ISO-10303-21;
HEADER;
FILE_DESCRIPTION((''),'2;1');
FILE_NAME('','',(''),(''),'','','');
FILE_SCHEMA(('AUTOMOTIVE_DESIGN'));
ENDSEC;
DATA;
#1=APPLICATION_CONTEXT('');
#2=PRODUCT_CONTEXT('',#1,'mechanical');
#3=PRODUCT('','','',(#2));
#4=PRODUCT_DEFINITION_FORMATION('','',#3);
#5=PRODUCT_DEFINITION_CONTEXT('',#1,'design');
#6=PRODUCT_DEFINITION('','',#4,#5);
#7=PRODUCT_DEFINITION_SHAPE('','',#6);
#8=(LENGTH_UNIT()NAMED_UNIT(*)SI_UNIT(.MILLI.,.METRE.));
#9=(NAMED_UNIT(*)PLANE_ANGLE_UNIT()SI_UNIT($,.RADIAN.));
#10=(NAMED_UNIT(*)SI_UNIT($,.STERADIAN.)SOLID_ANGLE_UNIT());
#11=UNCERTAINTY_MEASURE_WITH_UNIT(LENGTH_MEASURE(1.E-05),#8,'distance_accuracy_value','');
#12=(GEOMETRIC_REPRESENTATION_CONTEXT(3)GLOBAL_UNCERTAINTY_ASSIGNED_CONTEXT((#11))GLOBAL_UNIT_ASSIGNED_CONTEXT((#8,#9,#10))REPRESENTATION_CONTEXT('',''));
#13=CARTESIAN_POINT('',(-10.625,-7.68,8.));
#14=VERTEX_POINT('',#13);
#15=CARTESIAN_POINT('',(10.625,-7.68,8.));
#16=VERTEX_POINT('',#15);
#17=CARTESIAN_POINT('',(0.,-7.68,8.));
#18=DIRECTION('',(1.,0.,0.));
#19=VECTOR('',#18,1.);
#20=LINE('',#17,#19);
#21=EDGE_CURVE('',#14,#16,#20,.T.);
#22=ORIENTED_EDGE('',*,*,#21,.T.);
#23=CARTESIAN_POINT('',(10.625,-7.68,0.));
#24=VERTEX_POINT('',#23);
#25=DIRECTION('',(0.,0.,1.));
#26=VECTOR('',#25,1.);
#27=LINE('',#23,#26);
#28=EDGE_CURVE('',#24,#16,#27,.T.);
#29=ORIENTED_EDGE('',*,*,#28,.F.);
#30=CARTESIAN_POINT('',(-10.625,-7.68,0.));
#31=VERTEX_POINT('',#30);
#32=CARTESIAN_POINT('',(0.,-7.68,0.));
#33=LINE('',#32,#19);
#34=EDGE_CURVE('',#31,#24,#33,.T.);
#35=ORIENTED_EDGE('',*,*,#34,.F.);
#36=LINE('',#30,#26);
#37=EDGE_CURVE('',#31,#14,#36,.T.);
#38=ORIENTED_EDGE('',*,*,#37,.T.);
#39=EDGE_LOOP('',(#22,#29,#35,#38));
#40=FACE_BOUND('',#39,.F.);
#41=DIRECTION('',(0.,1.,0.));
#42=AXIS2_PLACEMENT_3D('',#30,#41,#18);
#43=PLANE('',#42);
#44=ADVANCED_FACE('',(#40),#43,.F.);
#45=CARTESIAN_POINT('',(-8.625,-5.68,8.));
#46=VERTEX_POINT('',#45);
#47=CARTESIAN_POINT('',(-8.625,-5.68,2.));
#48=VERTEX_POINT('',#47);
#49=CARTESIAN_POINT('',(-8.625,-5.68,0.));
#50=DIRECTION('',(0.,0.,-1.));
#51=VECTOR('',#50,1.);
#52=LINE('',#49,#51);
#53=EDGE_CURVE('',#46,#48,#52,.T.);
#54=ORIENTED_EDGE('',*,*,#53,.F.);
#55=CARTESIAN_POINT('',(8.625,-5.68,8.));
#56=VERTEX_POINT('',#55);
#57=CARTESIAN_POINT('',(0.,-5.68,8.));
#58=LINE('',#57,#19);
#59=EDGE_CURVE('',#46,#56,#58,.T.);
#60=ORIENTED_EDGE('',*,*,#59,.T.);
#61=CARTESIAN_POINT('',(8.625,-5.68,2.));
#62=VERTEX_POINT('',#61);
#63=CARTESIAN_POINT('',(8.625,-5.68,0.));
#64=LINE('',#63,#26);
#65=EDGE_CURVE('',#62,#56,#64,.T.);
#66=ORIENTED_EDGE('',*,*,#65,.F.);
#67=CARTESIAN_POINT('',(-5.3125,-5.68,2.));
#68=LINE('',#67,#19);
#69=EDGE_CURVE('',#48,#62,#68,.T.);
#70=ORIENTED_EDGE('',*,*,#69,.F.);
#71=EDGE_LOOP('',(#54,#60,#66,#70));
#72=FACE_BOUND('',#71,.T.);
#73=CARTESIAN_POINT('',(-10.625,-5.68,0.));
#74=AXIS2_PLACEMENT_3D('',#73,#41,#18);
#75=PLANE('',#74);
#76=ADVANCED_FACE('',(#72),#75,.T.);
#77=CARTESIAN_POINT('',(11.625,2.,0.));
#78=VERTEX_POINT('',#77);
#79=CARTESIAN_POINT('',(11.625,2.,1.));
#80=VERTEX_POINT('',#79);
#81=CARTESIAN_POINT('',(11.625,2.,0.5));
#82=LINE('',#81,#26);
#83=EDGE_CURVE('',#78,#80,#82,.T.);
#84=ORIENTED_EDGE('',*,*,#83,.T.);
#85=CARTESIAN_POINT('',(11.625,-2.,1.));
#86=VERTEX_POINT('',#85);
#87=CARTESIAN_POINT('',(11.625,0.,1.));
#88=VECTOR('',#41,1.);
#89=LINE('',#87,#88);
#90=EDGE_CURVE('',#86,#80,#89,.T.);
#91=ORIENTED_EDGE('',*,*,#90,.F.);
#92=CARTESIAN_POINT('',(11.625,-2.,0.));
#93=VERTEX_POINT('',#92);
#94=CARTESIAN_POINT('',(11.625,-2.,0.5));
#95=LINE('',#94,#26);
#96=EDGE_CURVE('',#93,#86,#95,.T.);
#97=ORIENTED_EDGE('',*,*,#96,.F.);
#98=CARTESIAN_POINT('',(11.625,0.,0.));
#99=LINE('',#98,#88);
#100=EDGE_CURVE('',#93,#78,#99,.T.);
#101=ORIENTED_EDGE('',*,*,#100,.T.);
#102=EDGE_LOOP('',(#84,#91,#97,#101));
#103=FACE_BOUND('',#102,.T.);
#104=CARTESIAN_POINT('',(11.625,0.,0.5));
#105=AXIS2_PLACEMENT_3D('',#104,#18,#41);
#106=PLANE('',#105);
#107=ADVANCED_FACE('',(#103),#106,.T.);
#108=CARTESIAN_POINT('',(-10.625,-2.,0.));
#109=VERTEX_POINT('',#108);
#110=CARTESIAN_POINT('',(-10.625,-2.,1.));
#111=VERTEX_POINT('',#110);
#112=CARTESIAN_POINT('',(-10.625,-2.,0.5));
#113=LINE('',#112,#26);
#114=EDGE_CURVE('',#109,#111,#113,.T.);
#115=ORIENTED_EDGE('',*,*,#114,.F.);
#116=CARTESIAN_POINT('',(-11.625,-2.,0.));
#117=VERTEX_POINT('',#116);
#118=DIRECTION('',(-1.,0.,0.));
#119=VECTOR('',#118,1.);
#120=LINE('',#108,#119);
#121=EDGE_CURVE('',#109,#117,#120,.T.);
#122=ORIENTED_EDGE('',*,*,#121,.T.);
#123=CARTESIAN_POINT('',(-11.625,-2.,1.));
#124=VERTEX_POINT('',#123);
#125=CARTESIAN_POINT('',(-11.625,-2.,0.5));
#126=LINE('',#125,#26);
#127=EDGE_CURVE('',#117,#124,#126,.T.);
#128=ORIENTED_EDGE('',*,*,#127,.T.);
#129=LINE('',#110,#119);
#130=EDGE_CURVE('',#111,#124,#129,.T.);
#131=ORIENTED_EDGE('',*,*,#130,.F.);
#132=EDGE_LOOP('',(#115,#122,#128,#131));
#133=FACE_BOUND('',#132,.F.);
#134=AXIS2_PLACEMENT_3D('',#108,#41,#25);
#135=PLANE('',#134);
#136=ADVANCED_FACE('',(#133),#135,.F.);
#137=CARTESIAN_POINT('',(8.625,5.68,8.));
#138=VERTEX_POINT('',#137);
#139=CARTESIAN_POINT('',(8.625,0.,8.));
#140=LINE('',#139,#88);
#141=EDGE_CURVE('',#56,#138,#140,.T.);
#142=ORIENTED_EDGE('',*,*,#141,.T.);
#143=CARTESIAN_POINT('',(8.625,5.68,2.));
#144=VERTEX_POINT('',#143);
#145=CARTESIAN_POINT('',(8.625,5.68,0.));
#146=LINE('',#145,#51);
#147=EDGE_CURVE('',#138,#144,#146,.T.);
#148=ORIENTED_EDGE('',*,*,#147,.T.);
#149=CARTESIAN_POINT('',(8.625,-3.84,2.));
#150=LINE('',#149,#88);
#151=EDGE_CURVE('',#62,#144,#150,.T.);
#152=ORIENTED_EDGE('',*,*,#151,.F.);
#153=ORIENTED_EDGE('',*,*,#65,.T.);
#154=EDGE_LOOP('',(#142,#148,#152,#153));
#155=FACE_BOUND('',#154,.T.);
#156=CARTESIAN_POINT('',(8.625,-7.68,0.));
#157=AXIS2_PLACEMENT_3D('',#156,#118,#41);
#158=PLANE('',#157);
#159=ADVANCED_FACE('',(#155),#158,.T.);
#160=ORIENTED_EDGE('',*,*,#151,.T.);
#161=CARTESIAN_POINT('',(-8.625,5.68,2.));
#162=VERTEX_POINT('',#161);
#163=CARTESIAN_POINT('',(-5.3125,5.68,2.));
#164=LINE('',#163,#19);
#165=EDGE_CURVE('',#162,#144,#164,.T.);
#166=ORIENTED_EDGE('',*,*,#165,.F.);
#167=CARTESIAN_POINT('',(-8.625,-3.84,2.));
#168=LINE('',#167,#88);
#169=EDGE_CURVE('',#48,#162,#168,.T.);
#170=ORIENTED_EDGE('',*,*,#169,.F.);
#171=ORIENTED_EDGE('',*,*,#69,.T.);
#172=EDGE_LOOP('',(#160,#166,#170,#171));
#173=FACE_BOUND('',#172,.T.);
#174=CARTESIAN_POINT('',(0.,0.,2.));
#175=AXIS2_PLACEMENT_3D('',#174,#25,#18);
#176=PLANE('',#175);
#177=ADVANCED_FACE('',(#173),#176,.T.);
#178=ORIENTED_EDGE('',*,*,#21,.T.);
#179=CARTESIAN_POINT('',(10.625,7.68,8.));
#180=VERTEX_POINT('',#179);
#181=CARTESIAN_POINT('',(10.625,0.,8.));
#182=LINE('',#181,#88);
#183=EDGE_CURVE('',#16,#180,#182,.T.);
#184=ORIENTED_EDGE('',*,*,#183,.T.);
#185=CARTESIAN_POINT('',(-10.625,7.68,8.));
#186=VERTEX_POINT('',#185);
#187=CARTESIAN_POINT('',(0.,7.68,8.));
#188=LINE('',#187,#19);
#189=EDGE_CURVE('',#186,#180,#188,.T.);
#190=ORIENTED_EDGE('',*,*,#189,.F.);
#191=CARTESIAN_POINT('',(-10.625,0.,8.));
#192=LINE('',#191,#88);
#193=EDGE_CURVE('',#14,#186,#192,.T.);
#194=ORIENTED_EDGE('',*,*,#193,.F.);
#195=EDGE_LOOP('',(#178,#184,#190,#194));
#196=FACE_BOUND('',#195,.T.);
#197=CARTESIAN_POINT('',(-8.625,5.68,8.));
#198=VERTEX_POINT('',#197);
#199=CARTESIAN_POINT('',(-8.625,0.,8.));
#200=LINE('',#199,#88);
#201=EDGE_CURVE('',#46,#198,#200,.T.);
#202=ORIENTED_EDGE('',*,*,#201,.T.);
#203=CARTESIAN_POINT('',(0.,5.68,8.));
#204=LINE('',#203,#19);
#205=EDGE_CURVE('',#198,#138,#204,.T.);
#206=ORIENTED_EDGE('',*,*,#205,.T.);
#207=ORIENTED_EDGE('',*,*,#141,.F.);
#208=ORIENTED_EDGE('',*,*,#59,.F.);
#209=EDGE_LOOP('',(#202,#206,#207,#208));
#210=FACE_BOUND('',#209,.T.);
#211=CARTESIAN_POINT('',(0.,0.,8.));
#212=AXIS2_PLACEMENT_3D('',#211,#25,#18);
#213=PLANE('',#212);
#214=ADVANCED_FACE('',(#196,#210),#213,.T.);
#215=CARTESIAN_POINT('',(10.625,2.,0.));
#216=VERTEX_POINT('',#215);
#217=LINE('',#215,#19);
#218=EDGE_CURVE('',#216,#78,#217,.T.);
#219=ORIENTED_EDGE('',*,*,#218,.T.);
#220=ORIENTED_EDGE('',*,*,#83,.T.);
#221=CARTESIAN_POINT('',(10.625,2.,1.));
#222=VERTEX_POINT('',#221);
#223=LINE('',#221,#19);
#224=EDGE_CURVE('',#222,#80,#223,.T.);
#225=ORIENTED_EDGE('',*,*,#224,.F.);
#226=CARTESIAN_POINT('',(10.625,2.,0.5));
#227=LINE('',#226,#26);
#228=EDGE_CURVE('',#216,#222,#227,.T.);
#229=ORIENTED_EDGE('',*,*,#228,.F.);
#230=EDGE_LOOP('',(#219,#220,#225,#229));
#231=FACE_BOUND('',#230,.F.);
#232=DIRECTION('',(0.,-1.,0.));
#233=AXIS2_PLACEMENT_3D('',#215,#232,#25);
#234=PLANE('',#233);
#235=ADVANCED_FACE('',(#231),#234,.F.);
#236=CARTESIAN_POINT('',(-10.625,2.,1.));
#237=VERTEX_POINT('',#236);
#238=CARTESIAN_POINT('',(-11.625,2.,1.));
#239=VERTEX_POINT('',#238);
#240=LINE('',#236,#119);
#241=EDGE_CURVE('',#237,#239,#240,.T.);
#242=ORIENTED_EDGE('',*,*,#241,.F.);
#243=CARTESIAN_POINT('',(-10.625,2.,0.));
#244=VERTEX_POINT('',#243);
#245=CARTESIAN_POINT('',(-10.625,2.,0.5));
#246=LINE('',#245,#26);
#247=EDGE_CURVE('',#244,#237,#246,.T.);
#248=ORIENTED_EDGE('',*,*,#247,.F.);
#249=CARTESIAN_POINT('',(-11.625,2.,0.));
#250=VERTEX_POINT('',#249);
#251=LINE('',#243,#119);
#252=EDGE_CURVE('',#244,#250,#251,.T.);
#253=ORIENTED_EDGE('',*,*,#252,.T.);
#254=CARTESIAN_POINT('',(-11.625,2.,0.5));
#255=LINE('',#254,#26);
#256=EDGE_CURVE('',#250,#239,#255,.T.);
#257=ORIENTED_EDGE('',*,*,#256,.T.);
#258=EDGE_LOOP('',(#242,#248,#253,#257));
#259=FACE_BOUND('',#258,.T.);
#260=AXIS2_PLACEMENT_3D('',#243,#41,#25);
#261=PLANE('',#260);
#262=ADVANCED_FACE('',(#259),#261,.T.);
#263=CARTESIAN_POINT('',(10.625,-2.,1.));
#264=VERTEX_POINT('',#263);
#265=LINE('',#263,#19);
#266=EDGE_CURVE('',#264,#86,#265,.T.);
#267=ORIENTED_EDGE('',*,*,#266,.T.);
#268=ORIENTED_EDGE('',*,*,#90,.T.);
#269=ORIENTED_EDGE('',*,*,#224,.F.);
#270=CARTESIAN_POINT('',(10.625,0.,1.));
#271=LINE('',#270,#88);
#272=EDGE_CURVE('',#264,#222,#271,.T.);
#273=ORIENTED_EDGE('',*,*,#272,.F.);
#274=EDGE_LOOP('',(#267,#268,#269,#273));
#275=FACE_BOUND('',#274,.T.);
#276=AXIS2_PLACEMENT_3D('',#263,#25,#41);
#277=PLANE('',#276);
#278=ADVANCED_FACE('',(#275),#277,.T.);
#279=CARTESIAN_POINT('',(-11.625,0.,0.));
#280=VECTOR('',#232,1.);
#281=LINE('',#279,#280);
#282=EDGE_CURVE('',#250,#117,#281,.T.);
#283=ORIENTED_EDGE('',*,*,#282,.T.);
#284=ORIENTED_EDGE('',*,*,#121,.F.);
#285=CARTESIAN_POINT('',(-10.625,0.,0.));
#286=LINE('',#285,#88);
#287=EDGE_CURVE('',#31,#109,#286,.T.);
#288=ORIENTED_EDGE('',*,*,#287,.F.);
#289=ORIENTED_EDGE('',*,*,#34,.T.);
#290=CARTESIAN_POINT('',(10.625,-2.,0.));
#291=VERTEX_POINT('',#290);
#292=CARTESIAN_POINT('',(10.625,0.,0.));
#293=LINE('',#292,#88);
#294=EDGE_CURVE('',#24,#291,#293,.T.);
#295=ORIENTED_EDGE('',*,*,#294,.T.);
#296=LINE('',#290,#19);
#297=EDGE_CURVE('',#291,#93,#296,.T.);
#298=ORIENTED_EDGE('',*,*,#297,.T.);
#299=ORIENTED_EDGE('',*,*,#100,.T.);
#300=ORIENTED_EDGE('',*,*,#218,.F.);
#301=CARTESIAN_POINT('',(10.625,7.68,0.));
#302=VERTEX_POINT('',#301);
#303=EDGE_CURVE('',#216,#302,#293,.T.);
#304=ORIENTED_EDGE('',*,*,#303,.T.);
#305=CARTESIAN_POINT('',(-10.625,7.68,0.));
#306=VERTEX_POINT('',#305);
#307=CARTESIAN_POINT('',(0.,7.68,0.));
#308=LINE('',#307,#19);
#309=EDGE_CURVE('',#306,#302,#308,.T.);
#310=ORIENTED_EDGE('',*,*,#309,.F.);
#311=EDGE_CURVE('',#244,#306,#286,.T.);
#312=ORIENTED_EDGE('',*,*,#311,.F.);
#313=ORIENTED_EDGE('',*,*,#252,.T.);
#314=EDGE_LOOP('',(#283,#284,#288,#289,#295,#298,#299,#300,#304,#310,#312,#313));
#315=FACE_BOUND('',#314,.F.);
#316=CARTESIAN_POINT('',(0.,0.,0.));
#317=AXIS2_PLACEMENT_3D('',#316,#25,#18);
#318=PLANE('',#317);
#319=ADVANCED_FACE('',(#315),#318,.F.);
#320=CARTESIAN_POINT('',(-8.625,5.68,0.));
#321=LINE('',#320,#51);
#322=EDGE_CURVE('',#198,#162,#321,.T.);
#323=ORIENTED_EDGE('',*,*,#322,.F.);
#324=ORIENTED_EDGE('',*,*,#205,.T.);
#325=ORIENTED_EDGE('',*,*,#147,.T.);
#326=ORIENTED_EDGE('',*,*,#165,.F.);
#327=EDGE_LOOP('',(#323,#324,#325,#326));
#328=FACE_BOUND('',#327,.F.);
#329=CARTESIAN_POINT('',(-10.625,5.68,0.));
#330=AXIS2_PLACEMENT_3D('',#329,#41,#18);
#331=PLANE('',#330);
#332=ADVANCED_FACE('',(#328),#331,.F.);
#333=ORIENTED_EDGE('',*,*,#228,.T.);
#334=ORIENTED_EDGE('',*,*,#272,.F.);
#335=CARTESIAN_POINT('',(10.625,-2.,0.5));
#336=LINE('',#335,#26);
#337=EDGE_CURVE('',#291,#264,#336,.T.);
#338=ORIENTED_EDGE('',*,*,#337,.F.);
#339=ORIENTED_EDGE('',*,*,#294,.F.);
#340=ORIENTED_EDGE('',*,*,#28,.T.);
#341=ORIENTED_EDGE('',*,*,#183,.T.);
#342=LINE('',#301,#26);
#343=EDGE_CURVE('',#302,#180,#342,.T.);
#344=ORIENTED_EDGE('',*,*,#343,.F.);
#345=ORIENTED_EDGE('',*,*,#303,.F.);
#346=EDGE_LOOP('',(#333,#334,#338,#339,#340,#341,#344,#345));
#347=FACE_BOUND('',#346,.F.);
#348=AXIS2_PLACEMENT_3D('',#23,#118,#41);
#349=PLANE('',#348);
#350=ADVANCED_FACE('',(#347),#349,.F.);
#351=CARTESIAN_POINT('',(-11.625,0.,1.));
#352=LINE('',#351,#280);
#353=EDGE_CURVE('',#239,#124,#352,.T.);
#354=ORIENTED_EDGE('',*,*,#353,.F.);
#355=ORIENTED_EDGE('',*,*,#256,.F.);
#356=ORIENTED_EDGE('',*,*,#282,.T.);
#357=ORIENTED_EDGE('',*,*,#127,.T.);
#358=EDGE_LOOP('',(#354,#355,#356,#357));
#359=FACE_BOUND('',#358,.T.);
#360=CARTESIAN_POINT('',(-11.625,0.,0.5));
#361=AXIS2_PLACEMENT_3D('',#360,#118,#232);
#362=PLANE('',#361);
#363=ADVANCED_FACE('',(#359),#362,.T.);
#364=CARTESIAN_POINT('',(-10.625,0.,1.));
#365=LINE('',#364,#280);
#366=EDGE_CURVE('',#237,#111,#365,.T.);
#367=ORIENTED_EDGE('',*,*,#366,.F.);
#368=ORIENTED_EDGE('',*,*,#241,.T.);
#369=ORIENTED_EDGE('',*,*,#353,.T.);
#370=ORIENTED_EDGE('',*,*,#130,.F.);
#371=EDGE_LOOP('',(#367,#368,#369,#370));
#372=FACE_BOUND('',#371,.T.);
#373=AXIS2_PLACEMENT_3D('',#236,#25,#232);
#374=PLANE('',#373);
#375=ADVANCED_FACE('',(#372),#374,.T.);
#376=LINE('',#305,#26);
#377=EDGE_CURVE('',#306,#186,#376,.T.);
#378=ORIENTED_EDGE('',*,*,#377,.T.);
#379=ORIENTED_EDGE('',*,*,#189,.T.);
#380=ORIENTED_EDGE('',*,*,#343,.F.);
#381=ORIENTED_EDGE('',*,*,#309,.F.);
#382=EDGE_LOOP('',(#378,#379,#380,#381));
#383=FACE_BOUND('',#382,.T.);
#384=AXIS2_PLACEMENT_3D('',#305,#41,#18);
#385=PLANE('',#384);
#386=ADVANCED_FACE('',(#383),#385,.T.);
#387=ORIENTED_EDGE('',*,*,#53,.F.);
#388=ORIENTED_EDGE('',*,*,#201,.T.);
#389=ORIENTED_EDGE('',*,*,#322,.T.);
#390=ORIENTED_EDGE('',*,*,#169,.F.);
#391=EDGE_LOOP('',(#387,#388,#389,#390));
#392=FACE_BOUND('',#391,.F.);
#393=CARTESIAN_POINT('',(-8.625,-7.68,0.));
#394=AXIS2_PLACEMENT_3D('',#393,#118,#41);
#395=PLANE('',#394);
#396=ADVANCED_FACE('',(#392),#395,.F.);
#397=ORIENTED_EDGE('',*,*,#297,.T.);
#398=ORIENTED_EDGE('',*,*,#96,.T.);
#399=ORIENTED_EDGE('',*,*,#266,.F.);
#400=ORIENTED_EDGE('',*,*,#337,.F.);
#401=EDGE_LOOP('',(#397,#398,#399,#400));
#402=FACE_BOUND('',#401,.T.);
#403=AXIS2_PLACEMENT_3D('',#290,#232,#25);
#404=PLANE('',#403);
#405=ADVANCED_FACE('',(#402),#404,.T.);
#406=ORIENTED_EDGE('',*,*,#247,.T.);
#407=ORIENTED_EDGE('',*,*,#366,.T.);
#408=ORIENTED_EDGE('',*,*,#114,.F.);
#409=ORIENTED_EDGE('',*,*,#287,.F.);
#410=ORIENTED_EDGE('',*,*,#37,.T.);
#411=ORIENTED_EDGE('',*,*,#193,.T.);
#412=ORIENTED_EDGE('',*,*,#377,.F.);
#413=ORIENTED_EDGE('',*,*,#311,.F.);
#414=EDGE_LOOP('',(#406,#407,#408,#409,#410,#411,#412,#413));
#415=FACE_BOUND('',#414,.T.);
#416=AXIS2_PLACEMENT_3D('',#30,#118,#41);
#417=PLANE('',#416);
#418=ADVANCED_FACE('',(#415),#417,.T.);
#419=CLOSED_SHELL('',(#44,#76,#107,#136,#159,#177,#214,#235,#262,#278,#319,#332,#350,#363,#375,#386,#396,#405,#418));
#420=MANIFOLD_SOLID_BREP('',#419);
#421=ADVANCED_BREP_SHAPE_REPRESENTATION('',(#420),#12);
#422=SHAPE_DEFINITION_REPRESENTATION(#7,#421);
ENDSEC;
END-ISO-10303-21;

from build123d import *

# Parameters (mm, degrees)
F0_W     = 21.25
F0_H     = 15.36
F1_DEPTH = 8
F2_T     = -2
F3_W     = 4
F3_H     = 1
F4_DEPTH = 1
F5_W     = 4
F5_H     = 1
F6_DEPTH = 1


# Not quite as in the source:
# - a feature names something its author has since deleted; it is built from what else it names


with BuildPart() as f1:
    # F0 (on Top) → F1 (new body)
    with BuildSketch(Plane.XY):
        Rectangle(F0_W, F0_H)
    extrude(amount=F1_DEPTH)

    # F2
    f2_openings = [f1.faces().sort_by_distance(p)[0] for p in [
        (0, 0, 8),
    ]]
    offset(amount=F2_T, openings=f2_openings)

    # F3 (on face) → F4 (join)
    with BuildSketch(Plane(origin=(-10.625, 0, 0), x_dir=(0, -1, 0), z_dir=(-1, 0, 0))):
        with Locations((0, 0.5)):
            Rectangle(F3_W, F3_H)
    extrude(amount=F4_DEPTH)

    # F5 (on face) → F6 (join)
    with BuildSketch(Plane.YZ.offset(10.625)):
        with Locations((0, 0.5)):
            Rectangle(F5_W, F5_H)
    extrude(amount=F6_DEPTH)


solid = f1.part
